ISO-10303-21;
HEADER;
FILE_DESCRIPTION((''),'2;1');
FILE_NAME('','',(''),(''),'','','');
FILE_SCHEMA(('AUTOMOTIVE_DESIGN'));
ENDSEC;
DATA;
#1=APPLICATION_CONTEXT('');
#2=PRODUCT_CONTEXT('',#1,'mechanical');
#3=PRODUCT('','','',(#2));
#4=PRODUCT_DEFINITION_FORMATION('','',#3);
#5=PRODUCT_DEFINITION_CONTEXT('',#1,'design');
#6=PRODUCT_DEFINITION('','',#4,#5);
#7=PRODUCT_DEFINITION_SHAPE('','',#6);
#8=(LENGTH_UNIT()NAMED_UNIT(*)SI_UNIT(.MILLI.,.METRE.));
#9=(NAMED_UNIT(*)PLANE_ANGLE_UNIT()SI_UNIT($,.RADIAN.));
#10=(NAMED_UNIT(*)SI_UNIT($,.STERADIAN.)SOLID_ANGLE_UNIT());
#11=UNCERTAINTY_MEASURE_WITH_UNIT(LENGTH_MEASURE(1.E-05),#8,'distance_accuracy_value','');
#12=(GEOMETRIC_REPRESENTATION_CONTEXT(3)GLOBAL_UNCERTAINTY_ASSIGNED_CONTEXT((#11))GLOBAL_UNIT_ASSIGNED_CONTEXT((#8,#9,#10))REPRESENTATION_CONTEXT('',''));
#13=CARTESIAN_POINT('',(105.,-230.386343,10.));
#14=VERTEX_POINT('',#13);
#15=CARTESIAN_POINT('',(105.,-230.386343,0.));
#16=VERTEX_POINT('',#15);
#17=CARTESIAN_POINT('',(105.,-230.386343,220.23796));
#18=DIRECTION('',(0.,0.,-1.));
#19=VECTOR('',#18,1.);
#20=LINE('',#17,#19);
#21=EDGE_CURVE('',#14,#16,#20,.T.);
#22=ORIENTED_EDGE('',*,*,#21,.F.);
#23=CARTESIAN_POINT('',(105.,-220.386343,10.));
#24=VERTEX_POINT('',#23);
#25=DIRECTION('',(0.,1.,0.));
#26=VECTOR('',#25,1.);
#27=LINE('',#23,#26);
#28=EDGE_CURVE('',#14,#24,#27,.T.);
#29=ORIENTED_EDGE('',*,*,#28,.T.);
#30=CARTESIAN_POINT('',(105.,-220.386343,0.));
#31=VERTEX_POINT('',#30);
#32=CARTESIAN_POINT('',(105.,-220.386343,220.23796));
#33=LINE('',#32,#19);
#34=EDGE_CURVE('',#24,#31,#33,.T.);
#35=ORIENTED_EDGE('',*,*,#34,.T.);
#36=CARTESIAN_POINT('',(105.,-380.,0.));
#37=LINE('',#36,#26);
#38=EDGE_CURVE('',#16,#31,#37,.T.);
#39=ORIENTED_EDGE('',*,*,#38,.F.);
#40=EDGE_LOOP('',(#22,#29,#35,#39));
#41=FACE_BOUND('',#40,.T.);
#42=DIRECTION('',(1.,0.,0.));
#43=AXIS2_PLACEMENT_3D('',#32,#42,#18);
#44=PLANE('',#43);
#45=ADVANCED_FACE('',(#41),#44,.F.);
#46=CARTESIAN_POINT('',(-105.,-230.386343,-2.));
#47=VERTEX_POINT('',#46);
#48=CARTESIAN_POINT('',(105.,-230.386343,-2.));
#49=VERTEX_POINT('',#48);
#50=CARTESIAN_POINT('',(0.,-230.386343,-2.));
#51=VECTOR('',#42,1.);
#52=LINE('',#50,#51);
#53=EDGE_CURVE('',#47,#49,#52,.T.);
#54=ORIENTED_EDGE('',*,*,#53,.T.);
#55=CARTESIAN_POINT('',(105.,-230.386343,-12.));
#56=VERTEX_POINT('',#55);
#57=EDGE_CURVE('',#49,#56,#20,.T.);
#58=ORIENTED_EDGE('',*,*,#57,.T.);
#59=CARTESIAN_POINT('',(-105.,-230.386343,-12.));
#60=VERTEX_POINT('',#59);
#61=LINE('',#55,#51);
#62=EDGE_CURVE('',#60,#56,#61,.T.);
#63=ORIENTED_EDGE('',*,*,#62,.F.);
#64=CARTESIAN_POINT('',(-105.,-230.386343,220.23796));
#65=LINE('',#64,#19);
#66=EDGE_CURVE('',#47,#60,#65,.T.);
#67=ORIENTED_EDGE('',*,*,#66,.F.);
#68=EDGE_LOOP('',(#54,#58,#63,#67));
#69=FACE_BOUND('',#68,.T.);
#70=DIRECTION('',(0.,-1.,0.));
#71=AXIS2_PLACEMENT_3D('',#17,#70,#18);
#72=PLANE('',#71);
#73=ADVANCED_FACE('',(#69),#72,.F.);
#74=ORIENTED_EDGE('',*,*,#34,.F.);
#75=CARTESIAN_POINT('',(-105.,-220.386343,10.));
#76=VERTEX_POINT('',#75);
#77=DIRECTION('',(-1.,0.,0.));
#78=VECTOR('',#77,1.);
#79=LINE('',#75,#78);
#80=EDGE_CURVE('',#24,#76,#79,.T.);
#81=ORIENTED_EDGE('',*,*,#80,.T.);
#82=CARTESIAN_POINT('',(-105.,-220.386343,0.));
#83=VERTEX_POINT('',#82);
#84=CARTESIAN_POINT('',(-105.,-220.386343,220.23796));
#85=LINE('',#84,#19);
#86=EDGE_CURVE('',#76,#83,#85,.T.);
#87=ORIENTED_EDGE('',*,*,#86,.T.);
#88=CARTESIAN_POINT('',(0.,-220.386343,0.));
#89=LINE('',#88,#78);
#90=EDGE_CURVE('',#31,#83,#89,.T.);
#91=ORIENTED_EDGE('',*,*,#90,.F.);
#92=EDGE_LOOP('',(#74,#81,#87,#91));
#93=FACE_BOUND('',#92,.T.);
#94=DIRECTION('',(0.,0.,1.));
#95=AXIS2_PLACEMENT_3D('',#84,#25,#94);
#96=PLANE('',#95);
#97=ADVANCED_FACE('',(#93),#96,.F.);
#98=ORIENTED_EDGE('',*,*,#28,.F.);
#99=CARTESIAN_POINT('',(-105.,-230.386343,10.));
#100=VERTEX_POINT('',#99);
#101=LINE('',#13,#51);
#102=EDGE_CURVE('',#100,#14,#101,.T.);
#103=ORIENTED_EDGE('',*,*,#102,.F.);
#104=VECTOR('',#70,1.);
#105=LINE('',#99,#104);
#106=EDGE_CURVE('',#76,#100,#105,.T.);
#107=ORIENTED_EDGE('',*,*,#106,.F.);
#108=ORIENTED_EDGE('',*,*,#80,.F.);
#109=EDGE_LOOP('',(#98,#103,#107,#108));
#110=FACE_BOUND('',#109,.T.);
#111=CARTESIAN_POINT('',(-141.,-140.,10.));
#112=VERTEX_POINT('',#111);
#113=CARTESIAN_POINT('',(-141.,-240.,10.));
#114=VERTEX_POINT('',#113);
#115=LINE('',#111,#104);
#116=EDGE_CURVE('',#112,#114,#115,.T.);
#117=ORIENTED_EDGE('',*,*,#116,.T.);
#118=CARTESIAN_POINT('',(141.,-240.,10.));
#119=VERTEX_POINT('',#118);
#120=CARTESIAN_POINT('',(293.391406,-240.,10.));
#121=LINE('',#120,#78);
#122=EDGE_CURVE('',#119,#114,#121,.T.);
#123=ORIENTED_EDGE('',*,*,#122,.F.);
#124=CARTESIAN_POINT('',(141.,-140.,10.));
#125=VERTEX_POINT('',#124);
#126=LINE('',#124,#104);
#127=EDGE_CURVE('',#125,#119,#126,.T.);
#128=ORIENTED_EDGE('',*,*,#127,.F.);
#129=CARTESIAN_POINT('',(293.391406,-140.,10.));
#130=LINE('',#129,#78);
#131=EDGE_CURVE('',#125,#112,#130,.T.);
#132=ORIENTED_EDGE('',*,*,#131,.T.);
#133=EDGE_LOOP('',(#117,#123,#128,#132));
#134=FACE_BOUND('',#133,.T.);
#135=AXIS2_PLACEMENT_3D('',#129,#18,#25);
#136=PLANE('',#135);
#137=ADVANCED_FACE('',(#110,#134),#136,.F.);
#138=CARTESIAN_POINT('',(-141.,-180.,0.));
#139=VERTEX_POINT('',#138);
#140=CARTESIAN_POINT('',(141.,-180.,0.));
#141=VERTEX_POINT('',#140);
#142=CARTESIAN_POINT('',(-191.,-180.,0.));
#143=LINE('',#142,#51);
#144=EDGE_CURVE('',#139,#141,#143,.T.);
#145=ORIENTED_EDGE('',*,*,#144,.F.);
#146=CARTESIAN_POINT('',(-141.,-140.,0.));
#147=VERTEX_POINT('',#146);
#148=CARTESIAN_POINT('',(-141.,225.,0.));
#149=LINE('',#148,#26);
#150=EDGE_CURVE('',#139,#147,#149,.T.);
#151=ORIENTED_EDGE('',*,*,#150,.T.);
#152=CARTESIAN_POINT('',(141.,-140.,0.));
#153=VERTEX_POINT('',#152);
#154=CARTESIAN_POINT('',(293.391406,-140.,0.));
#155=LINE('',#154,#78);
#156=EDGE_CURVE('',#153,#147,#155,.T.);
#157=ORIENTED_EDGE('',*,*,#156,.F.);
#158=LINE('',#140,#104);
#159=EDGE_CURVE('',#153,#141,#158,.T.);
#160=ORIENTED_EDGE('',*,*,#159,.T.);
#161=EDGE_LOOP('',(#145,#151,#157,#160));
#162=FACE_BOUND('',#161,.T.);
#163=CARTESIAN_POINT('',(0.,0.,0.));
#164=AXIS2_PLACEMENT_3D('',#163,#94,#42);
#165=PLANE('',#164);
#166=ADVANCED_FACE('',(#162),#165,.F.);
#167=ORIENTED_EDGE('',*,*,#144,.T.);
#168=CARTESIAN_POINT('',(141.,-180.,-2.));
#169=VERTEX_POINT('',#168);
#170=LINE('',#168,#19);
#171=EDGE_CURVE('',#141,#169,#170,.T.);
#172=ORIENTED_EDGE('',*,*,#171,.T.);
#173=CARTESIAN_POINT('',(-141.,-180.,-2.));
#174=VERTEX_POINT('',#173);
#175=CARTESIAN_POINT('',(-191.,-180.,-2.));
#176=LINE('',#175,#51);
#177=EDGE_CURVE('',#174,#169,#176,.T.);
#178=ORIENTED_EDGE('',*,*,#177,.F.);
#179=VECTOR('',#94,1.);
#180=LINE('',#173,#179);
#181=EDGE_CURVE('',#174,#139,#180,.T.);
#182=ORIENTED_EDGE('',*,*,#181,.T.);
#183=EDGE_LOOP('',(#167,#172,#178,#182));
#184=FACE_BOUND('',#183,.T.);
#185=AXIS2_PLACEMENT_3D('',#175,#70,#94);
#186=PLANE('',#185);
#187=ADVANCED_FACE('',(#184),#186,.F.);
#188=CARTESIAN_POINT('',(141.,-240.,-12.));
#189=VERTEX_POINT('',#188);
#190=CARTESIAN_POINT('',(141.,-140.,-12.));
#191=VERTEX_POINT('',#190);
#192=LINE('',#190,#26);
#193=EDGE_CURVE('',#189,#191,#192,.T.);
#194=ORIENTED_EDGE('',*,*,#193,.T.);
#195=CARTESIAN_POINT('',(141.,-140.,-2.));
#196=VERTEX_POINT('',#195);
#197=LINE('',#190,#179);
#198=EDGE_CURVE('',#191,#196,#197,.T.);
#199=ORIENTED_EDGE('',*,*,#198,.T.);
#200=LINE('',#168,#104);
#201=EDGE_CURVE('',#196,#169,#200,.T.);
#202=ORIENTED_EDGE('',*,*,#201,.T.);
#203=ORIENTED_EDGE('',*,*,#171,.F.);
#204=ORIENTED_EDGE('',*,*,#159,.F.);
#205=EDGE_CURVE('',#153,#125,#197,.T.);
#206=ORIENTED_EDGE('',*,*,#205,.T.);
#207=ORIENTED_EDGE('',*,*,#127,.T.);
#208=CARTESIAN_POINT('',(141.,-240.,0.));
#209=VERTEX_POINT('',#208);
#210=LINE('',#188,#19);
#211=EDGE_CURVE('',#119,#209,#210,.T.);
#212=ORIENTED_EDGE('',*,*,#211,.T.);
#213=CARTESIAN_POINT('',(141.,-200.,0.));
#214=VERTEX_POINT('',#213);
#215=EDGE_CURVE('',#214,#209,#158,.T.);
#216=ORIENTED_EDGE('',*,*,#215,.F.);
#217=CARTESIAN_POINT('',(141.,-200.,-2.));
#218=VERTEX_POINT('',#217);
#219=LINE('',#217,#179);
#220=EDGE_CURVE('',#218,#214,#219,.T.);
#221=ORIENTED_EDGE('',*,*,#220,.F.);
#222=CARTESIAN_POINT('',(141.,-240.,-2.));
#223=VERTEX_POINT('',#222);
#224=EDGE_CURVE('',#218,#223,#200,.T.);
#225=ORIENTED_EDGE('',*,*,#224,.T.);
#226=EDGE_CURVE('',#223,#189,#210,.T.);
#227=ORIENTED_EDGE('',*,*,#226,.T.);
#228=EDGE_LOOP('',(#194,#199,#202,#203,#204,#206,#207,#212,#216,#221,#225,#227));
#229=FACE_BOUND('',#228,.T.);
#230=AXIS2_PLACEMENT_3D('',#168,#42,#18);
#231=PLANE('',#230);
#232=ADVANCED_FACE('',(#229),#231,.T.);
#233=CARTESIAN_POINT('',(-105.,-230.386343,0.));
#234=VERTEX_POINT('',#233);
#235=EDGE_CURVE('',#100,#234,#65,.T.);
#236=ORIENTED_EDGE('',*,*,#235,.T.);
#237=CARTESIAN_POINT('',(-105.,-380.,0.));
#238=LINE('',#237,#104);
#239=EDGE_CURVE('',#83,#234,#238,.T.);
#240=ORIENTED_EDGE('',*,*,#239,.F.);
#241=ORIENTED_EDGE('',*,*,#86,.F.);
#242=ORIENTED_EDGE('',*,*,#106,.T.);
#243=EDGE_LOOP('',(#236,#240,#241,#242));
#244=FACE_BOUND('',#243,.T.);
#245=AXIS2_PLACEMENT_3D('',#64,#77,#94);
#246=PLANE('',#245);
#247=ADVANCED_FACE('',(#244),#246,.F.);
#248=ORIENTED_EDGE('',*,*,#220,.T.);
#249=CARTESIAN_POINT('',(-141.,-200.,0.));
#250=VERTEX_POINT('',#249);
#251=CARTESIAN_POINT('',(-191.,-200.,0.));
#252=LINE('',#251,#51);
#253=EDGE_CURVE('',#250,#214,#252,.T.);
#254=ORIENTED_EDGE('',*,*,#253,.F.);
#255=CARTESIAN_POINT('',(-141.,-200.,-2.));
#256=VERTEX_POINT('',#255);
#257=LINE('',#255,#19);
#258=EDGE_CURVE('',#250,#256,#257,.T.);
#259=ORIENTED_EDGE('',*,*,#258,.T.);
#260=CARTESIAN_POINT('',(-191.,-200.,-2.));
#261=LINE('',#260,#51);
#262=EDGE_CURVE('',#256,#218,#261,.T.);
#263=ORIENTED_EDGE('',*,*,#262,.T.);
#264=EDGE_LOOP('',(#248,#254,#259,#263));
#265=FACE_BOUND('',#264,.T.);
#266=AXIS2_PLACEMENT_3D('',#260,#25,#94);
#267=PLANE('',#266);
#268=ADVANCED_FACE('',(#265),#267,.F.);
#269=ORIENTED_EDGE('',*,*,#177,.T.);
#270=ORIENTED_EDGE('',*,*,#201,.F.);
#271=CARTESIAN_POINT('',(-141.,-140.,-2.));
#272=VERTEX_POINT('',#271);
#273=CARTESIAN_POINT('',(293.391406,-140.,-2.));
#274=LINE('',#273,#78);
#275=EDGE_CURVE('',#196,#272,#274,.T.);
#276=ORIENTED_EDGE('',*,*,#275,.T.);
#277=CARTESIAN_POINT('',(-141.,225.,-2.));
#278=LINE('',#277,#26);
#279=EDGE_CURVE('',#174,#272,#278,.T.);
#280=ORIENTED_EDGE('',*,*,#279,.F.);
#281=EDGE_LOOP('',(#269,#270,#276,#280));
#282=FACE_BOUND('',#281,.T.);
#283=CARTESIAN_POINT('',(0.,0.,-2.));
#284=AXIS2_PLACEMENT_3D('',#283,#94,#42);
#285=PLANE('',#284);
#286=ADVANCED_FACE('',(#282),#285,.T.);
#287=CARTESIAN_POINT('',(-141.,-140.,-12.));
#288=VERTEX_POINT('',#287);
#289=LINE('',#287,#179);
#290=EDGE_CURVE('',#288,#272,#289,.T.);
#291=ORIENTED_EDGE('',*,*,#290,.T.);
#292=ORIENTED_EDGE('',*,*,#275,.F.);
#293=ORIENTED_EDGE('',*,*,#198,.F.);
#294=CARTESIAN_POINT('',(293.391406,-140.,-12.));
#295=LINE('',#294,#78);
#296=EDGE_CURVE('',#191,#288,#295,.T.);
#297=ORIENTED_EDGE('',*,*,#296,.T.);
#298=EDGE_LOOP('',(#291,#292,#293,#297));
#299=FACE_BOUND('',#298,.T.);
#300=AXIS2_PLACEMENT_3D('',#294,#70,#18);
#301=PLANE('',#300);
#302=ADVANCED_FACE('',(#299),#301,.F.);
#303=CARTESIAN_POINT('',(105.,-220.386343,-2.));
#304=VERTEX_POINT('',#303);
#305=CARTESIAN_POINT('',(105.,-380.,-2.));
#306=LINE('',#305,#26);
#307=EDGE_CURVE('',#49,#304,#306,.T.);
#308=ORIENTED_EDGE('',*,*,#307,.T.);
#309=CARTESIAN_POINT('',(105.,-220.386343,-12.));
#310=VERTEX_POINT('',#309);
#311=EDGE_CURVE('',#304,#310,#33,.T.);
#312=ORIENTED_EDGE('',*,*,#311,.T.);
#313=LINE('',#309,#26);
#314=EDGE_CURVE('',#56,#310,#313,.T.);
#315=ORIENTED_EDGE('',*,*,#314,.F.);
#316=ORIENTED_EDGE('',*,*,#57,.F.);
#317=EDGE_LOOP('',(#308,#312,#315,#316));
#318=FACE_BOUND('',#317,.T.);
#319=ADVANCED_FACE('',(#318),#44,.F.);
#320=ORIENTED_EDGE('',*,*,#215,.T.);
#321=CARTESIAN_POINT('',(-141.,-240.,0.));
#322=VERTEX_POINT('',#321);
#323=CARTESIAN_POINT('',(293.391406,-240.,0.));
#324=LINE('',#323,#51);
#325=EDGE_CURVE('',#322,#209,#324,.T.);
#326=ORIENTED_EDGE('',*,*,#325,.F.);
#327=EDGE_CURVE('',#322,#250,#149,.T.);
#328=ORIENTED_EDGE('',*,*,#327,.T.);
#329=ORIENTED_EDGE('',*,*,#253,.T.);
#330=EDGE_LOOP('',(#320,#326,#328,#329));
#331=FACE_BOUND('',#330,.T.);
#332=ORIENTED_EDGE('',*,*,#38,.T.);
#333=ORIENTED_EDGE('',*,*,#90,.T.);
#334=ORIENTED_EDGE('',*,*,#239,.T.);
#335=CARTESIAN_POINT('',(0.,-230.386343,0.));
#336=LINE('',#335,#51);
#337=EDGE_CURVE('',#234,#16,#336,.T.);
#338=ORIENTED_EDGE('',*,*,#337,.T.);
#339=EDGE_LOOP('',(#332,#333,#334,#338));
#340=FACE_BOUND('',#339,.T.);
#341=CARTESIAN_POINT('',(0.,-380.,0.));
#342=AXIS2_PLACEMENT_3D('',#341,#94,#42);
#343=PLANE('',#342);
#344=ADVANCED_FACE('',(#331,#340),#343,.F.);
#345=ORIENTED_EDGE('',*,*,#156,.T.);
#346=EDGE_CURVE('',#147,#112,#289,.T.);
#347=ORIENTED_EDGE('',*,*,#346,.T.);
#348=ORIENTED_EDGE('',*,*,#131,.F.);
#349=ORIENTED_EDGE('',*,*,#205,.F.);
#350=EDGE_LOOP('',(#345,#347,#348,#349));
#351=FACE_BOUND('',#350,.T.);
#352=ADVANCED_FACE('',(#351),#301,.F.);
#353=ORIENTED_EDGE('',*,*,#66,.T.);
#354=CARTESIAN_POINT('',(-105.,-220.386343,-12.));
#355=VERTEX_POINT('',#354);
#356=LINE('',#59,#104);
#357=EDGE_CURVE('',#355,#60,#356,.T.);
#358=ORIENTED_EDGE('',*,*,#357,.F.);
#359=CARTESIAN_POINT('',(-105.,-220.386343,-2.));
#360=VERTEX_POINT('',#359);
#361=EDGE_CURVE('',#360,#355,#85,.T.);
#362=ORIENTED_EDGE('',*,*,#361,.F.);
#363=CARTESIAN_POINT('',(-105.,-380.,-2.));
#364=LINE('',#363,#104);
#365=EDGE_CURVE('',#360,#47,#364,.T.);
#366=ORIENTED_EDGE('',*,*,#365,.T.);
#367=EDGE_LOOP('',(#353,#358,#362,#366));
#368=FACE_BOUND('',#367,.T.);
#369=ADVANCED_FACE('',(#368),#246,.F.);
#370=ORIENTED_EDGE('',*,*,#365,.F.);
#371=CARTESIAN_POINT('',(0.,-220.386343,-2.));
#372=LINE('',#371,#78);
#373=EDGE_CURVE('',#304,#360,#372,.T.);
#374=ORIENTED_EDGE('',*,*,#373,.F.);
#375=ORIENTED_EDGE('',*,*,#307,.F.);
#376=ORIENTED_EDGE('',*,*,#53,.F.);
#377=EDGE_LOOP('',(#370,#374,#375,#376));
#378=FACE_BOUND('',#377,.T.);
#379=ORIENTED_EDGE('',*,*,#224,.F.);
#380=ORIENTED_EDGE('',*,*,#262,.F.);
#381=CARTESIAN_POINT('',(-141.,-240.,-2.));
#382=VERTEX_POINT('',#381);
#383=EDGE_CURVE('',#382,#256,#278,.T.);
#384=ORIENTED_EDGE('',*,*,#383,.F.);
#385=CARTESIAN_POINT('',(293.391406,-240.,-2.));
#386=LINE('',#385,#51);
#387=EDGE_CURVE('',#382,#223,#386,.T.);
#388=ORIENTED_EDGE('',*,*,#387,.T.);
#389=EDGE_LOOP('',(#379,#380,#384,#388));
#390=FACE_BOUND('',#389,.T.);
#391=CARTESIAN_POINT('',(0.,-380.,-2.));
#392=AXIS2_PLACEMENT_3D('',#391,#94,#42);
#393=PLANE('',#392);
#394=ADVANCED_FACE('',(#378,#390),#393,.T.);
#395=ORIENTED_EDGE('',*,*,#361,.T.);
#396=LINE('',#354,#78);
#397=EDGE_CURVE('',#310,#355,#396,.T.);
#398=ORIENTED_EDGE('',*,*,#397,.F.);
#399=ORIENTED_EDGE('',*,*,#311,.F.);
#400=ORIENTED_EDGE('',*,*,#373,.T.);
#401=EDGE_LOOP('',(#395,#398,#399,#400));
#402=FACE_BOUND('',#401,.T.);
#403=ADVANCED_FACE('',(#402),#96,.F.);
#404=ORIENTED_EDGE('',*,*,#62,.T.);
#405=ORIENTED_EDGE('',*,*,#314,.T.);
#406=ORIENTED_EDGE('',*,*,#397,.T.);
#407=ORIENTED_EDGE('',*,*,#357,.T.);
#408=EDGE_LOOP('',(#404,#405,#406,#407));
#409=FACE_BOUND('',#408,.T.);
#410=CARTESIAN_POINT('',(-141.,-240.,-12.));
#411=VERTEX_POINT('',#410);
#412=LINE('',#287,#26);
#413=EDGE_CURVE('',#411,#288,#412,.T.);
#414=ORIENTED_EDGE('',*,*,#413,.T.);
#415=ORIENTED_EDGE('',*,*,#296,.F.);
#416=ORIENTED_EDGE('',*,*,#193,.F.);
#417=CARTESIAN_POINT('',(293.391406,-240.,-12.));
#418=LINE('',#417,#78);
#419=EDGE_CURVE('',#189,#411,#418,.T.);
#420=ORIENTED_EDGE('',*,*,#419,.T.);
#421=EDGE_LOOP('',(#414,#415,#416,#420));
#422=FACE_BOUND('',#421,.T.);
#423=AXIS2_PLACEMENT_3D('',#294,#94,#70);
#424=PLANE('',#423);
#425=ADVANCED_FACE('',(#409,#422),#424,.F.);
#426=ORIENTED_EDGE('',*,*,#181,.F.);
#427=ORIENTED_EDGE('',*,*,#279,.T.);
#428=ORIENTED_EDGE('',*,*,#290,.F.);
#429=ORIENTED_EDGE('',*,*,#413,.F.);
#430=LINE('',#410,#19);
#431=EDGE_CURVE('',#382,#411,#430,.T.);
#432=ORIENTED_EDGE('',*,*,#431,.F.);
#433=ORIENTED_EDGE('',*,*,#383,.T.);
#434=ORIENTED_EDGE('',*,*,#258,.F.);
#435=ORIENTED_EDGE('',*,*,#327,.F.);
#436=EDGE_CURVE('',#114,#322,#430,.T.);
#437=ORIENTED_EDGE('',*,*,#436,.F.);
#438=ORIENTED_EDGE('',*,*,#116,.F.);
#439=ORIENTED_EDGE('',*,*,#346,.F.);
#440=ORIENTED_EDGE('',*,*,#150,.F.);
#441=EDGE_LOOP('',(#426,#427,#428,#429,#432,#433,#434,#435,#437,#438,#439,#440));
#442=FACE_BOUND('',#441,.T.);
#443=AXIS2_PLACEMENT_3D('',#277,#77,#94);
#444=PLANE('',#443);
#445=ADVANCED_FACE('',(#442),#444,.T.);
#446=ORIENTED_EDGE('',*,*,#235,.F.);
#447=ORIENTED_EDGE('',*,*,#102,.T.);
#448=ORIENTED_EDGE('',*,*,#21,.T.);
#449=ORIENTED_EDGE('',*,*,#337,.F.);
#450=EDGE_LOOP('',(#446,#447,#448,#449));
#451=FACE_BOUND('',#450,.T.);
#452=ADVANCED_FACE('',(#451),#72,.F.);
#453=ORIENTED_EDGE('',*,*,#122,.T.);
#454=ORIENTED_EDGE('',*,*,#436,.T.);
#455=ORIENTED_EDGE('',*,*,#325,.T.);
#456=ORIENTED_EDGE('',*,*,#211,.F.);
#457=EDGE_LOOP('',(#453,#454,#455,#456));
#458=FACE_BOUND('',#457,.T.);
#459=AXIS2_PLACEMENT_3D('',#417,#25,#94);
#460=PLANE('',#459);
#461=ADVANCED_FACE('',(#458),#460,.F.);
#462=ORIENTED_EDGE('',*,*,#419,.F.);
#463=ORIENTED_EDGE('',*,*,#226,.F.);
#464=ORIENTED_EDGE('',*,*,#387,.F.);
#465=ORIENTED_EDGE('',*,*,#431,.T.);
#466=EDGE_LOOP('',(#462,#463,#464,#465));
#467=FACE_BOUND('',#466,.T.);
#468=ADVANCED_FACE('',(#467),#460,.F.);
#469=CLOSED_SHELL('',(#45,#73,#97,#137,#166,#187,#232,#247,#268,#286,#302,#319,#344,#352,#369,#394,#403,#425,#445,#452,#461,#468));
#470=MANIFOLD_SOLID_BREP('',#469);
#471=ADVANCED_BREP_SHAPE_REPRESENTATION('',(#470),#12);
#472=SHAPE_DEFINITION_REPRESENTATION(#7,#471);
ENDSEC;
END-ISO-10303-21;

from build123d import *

# Parameters (mm, degrees)
BOSS_EXTRUDE1_DEPTH            = 141
BOSS_EXTRUDE1_DEPTH_BACK       = 141
SKETCH1_W                      = 22
SKETCH1_H                      = 100
CAVITY1_START                  = -2
CAVITY1_OUTLINE_W              = 282
CAVITY1_OUTLINE_H              = 40
CAVITY1_DEPTH                  = 2
CUT_EXTRUDE1_REACH             = 280.613
SKETCH2_W                      = 210
SKETCH2_H                      = 10
CUT_EXTRUDE1_DIRECTION_2_REACH = 280.613


# Read off the part's stored shape, not the designer's step: Cavity1
with BuildPart() as part:
    # Sketch1 → Boss-Extrude1 (new, two sides: drawn at the far end of the back side and taken through both)
    with BuildSketch(Plane(origin=(0, 0, 0), x_dir=(0, 0, -1), z_dir=(1, 0, 0)).offset(-BOSS_EXTRUDE1_DEPTH_BACK)):
        with Locations((1, -190)):
            Rectangle(SKETCH1_W, SKETCH1_H)
    extrude(amount=BOSS_EXTRUDE1_DEPTH + BOSS_EXTRUDE1_DEPTH_BACK)

    # Cavity1 outline → Cavity1 (cut)
    with BuildSketch(Plane.XY.offset(CAVITY1_START)):
        with Locations((0, -160)):
            Rectangle(CAVITY1_OUTLINE_W, CAVITY1_OUTLINE_H)
    cavity1 = extrude(amount=CAVITY1_DEPTH, mode=Mode.SUBTRACT)

    # Mirror1: Cavity1 across plane
    add(cavity1.mirror(Plane.ZX.offset(-190)), mode=Mode.SUBTRACT)

    # Cut-Extrude1: up to this face of the body (flat: up to its plane)
    cut_extrude1_end = Plane(part.part.faces().sort_by_distance((0, -190, 10))[0])
    # Sketch2 → Cut-Extrude1 (cut, up to the picked face)
    with BuildSketch(Plane(origin=(0, 0, 0), x_dir=(-1, 0, 0), z_dir=(0, 0, -1)), mode=Mode.PRIVATE) as cut_extrude1_sk1:
        with Locations((0, -225.386342941)):
            Rectangle(SKETCH2_W, SKETCH2_H)
    cut_extrude1_tool1 = split(extrude(cut_extrude1_sk1.sketch, amount=-CUT_EXTRUDE1_REACH, mode=Mode.PRIVATE), bisect_by=cut_extrude1_end, keep=Keep.BOTH, mode=Mode.PRIVATE)
    add(cut_extrude1_tool1.solids().sort_by(Axis((0, -225.386343, 0), (0, 0, 1)))[0], mode=Mode.SUBTRACT)

    # Cut-Extrude1 direction 2: up to this face of the body (flat: up to its plane)
    cut_extrude1_direction_2_end = Plane(part.part.faces().sort_by_distance((0, -190, -12))[0])
    # Sketch2 → Cut-Extrude1 direction 2 (cut, up to the picked face)
    with BuildSketch(Plane(origin=(0, 0, 0), x_dir=(-1, 0, 0), z_dir=(0, 0, -1)), mode=Mode.PRIVATE) as cut_extrude1_direction_2_sk1:
        with Locations((0, -225.386342941)):
            Rectangle(SKETCH2_W, SKETCH2_H)
    cut_extrude1_direction_2_tool1 = split(extrude(cut_extrude1_direction_2_sk1.sketch, amount=CUT_EXTRUDE1_DIRECTION_2_REACH, mode=Mode.PRIVATE), bisect_by=cut_extrude1_direction_2_end, keep=Keep.BOTH, mode=Mode.PRIVATE)
    add(cut_extrude1_direction_2_tool1.solids().sort_by(Axis((0, -225.386343, 0), (0, 0, -1)))[0], mode=Mode.SUBTRACT)


solid = part.part
